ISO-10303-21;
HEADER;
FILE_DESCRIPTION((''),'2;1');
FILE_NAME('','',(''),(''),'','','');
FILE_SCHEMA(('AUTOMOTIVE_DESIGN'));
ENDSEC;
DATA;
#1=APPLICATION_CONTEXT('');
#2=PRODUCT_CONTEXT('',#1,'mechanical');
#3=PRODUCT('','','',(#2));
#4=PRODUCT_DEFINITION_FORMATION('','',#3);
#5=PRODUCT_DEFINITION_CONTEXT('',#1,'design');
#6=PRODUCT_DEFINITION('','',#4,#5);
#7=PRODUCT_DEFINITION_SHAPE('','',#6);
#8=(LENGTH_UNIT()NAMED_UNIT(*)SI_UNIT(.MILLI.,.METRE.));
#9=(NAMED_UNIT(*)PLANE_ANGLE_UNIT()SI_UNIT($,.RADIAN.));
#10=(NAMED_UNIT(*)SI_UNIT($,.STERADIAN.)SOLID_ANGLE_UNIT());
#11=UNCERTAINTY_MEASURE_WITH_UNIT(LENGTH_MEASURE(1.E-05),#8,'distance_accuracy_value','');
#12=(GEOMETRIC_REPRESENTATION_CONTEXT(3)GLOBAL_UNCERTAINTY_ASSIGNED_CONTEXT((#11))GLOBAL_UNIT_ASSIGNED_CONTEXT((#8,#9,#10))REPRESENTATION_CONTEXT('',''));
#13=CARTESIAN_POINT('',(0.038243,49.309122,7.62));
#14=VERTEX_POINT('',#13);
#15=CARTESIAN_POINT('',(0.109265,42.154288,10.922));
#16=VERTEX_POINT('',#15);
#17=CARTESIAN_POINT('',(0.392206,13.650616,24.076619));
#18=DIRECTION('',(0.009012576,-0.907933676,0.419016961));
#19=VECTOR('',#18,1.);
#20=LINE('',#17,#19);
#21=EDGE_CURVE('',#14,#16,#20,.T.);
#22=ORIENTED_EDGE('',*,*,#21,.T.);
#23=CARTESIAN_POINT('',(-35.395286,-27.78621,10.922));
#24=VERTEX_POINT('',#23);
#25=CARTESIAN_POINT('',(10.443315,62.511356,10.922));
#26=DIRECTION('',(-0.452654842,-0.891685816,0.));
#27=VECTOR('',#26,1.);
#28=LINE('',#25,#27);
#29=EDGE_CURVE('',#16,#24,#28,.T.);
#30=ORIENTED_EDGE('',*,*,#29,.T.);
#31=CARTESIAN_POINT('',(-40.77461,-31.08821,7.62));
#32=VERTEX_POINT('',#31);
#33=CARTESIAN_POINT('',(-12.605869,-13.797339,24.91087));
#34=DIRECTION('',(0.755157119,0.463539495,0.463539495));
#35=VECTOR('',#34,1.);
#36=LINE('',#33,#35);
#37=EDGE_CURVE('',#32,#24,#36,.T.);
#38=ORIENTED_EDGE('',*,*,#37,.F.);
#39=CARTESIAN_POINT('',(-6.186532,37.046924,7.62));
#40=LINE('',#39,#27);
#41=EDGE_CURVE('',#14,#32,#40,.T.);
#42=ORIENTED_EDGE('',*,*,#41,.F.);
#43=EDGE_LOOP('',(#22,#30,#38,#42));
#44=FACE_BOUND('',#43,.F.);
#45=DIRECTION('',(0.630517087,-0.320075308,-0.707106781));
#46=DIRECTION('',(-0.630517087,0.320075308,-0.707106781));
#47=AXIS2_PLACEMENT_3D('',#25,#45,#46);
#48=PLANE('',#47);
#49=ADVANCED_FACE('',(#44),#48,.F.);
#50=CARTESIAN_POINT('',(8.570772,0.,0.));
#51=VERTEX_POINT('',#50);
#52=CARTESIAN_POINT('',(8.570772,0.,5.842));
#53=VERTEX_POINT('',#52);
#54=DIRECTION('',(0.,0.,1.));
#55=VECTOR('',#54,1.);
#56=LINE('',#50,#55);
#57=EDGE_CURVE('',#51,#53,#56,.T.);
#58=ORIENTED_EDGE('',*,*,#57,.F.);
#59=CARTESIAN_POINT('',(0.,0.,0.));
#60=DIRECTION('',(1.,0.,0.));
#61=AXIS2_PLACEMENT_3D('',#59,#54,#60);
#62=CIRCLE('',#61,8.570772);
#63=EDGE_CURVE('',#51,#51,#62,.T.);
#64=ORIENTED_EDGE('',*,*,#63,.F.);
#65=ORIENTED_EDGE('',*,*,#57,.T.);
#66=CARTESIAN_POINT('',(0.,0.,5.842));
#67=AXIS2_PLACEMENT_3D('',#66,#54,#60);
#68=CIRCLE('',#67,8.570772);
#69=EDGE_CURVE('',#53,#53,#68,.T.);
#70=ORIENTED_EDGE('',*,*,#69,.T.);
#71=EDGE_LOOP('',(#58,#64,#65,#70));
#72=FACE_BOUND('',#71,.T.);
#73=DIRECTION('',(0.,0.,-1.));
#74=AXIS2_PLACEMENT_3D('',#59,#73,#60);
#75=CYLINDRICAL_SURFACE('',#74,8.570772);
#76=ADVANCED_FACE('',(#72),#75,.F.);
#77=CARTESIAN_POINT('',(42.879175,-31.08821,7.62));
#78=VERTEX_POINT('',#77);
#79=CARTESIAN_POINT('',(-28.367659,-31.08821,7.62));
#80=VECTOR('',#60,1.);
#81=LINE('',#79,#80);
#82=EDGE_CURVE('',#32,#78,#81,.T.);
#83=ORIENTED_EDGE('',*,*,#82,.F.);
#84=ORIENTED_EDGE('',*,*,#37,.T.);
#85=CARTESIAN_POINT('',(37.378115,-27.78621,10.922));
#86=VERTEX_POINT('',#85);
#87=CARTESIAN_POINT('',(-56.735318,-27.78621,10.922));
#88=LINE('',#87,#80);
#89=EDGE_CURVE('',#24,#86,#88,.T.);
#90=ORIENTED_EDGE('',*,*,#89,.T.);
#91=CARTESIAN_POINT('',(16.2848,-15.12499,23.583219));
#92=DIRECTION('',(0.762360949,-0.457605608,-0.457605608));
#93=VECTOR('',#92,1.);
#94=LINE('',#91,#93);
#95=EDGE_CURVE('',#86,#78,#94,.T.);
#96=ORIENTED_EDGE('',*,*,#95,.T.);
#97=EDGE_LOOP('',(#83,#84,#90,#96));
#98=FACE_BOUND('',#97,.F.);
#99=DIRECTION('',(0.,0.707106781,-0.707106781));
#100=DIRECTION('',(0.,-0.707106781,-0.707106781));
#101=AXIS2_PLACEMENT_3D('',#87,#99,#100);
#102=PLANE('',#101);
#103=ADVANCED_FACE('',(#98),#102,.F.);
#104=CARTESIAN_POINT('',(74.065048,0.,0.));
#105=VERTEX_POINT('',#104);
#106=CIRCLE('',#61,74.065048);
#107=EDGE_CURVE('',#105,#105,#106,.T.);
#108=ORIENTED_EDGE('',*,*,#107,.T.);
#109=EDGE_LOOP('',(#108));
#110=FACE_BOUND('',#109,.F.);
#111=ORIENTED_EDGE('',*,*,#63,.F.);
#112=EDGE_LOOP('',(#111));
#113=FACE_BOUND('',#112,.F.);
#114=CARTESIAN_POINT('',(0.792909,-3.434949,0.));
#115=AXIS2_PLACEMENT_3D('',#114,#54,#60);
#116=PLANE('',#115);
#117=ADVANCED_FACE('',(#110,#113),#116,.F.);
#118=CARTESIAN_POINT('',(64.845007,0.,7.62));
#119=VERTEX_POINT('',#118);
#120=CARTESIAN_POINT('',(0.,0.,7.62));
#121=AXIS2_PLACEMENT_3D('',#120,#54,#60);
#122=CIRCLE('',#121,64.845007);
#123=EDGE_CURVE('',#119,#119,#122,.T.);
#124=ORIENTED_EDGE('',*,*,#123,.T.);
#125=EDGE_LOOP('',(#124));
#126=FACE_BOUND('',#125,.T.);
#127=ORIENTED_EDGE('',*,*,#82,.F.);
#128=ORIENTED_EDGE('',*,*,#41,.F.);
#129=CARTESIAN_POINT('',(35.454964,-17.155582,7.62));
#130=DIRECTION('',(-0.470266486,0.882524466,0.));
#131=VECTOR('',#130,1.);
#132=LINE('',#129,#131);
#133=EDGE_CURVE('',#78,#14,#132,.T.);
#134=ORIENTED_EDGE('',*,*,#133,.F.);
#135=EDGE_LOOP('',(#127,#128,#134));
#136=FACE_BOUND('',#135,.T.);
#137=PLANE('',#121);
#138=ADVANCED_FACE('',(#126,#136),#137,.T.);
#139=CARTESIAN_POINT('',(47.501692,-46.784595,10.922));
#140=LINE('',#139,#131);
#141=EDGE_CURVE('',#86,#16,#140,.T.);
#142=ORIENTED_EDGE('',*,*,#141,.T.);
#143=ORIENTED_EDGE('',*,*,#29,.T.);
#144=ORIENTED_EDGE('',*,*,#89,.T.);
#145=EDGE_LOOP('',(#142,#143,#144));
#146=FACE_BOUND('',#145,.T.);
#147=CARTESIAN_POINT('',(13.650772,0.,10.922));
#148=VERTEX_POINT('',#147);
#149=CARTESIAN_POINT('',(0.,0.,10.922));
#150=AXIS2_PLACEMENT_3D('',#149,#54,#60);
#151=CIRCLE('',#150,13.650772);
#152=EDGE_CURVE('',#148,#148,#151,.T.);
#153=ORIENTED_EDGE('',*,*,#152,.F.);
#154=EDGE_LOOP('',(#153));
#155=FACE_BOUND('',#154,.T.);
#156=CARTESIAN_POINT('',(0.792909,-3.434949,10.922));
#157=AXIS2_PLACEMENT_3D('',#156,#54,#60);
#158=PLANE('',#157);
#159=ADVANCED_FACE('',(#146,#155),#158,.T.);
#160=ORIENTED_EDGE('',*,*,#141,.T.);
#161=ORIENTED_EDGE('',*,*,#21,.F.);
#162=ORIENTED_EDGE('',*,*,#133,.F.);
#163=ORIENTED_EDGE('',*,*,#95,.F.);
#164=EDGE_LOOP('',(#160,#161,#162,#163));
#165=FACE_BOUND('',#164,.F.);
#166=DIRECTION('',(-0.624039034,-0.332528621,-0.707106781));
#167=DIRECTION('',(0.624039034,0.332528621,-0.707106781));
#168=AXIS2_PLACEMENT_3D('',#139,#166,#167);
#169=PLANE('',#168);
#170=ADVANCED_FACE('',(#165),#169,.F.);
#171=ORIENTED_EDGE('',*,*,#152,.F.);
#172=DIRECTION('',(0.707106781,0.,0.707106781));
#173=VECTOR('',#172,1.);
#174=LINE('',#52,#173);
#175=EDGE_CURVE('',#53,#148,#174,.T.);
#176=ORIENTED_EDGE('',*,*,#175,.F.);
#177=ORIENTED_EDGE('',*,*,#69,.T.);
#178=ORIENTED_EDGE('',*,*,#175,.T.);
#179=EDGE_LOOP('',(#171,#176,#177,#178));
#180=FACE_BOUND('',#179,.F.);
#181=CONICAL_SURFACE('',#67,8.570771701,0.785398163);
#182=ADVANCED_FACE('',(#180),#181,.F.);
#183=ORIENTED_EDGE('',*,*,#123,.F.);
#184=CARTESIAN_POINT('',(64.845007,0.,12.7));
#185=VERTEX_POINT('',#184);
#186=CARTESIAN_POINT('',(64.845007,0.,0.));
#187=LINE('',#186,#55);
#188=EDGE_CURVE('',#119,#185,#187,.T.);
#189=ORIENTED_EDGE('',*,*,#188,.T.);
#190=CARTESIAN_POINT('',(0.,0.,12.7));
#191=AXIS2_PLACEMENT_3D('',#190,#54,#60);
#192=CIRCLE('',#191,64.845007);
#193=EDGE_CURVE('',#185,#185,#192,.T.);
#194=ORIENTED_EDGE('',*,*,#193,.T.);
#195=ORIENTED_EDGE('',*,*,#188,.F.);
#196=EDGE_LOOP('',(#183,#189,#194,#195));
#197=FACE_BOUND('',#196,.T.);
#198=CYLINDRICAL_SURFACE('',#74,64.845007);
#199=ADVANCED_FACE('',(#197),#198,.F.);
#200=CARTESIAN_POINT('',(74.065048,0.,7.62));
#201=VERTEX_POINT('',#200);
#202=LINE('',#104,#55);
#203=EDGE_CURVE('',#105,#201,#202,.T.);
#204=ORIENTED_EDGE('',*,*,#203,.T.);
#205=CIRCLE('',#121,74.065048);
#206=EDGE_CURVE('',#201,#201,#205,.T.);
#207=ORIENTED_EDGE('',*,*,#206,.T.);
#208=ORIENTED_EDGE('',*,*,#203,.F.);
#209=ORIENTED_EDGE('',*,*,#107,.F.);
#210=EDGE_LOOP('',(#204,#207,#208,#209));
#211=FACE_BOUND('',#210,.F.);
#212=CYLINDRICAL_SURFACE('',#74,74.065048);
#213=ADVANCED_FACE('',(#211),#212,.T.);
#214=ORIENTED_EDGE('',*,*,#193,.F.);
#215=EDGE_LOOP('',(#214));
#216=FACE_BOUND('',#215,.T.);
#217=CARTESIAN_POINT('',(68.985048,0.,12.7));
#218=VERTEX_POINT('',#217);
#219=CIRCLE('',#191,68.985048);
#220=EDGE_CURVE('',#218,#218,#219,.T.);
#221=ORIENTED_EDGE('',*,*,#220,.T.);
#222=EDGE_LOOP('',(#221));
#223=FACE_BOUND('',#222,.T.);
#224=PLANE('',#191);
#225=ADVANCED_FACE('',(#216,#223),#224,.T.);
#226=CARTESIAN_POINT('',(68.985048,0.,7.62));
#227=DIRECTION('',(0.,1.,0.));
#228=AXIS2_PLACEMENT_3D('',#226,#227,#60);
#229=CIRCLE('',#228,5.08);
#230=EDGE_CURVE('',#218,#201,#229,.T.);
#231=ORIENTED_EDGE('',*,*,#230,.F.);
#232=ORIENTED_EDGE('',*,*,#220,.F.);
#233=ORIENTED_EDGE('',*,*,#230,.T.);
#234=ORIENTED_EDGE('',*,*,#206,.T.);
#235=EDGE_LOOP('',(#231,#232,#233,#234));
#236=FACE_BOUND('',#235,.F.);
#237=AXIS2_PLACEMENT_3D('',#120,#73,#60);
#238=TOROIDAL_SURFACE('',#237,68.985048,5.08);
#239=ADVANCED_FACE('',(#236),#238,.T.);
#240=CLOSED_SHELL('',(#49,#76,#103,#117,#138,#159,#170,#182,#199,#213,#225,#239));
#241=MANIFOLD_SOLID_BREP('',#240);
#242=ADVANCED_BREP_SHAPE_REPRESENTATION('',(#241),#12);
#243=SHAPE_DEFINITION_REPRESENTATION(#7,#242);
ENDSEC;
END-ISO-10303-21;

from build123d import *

# Parameters (mm, degrees)
F0_R         = 74.0650481318
F0_R_2       = 64.8450067866
F1_DEPTH     = 12.7
F2_DEPTH     = 7.62
F0_R_3       = 8.5707717009
F3_DEPTH     = 10.922
F4_R         = 5.08
F5_T4_DEPTH  = 123.6076762244
F5_T11_DEPTH = 122.6061545132
F5_T18_DEPTH = 115.6407516409


# Not quite as in the source:
# - a fillet or chamfer that OpenCascade refuses, or shapes differently, is made with other operations: its cross-section is extruded or revolved along the edge and cut away or added


with BuildPart() as f1:
    # F0 (on Top) → F1 (new body)
    with BuildSketch(Plane.XY):
        Circle(F0_R)
        Circle(F0_R_2, mode=Mode.SUBTRACT)
    extrude(amount=F1_DEPTH)

    # F0 (on Top) → F2 (join)
    with BuildSketch(Plane.XY):
        Circle(F0_R_2)
        Polygon((45.8412840962, -32.8662097454), (-43.6711683869, -32.8662097454), (0, 53.1617254019), align=None, mode=Mode.SUBTRACT)
    extrude(amount=F2_DEPTH)

    # F0 (on Top) → F3 (join)
    with BuildSketch(Plane.XY):
        Polygon((0, 53.1617254019), (-43.6711683869, -32.8662097454), (45.8412840962, -32.8662097454), align=None)
        Circle(F0_R_3, mode=Mode.SUBTRACT)
    extrude(amount=F3_DEPTH)

    # F4
    f4_edges = [f1.edges().sort_by_distance(p)[0] for p in [
        (-74.065048, 0, 12.7),
    ]]
    fillet(f4_edges, radius=F4_R)

    # F5: chamfer of 5.08 on 4 edges, made by hand


with BuildPart() as f5_tool2:
    # F5_s3 → F5_t4 (new body)
    with BuildSketch(Plane(origin=(29.9216472697, -56.1523871237, 0), x_dir=(0, 0, 1), z_dir=(-0.4702664859, 0.8825244655, 0))):
        Polygon((10.922, 19.9201777866), (5.842, 25.0001777866), (10.922, 25.0001777866), align=None)
    extrude(amount=F5_T4_DEPTH)

    split(bisect_by=Plane.XY.offset(7.62), keep=Keep.TOP)

    split(bisect_by=Plane(origin=(-21.4574493748, 10.8926464781, 0), x_dir=(0, 0, 1), z_dir=(0.8916858157, -0.4526548422, 0)), keep=Keep.TOP)

    split(bisect_by=Plane.XZ.offset(32.8662097454), keep=Keep.BOTTOM)


with BuildPart() as f1_1:
    add(f1.part)

    # F5_t1: cut F5_tool2
    add(f5_tool2.part, mode=Mode.SUBTRACT)


with BuildPart() as f5_tool9:
    # F5_s10 → F5_t11 (new body)
    with BuildSketch(Plane(origin=(27.3709999402, 53.9181957971, 0), x_dir=(0, 0, 1), z_dir=(-0.4526548422, -0.8916858157, 0))):
        Polygon((10.922, 18.9839124202), (5.842, 24.0639124202), (10.922, 24.0639124202), align=None)
    extrude(amount=F5_T11_DEPTH)

    split(bisect_by=Plane.XY.offset(7.62), keep=Keep.TOP)

    split(bisect_by=Plane(origin=(22.0632685396, 11.7567457534, 0), x_dir=(0, 0, 1), z_dir=(-0.8825244655, -0.4702664859, 0)), keep=Keep.TOP)

    split(bisect_by=Plane.XZ.offset(32.8662097454), keep=Keep.BOTTOM)


with BuildPart() as f1_2:
    add(f1_1.part)

    # F5_t8: cut F5_tool9
    add(f5_tool9.part, mode=Mode.SUBTRACT)


with BuildPart() as f5_tool16:
    # F5_s17 → F5_t18 (new body)
    with BuildSketch(Plane.YZ.offset(-56.7353179658)):
        Polygon((-27.7862097454, 10.922), (-32.8662097454, 5.842), (-32.8662097454, 10.922), align=None)
    extrude(amount=F5_T18_DEPTH)

    split(bisect_by=Plane.XY.offset(7.62), keep=Keep.TOP)

    split(bisect_by=Plane(origin=(22.0632685396, 11.7567457534, 0), x_dir=(0, 0, 1), z_dir=(-0.8825244655, -0.4702664859, 0)), keep=Keep.TOP)

    split(bisect_by=Plane(origin=(-21.4574493748, 10.8926464781, 0), x_dir=(0, 0, 1), z_dir=(0.8916858157, -0.4526548422, 0)), keep=Keep.TOP)


with BuildPart() as f1_3:
    add(f1_2.part)

    # F5_t15: cut F5_tool16
    add(f5_tool16.part, mode=Mode.SUBTRACT)

    # F5_s22 → F5_t23 (revolve, cut)
    with BuildSketch(Plane.XZ):
        Polygon((8.5707717009, 5.842), (13.6507717009, 10.922), (8.5707717009, 10.922), align=None)
    revolve(axis=Axis((0, 0, 10.922), (0, 0, 1)), mode=Mode.SUBTRACT)


solid = f1_3.part
